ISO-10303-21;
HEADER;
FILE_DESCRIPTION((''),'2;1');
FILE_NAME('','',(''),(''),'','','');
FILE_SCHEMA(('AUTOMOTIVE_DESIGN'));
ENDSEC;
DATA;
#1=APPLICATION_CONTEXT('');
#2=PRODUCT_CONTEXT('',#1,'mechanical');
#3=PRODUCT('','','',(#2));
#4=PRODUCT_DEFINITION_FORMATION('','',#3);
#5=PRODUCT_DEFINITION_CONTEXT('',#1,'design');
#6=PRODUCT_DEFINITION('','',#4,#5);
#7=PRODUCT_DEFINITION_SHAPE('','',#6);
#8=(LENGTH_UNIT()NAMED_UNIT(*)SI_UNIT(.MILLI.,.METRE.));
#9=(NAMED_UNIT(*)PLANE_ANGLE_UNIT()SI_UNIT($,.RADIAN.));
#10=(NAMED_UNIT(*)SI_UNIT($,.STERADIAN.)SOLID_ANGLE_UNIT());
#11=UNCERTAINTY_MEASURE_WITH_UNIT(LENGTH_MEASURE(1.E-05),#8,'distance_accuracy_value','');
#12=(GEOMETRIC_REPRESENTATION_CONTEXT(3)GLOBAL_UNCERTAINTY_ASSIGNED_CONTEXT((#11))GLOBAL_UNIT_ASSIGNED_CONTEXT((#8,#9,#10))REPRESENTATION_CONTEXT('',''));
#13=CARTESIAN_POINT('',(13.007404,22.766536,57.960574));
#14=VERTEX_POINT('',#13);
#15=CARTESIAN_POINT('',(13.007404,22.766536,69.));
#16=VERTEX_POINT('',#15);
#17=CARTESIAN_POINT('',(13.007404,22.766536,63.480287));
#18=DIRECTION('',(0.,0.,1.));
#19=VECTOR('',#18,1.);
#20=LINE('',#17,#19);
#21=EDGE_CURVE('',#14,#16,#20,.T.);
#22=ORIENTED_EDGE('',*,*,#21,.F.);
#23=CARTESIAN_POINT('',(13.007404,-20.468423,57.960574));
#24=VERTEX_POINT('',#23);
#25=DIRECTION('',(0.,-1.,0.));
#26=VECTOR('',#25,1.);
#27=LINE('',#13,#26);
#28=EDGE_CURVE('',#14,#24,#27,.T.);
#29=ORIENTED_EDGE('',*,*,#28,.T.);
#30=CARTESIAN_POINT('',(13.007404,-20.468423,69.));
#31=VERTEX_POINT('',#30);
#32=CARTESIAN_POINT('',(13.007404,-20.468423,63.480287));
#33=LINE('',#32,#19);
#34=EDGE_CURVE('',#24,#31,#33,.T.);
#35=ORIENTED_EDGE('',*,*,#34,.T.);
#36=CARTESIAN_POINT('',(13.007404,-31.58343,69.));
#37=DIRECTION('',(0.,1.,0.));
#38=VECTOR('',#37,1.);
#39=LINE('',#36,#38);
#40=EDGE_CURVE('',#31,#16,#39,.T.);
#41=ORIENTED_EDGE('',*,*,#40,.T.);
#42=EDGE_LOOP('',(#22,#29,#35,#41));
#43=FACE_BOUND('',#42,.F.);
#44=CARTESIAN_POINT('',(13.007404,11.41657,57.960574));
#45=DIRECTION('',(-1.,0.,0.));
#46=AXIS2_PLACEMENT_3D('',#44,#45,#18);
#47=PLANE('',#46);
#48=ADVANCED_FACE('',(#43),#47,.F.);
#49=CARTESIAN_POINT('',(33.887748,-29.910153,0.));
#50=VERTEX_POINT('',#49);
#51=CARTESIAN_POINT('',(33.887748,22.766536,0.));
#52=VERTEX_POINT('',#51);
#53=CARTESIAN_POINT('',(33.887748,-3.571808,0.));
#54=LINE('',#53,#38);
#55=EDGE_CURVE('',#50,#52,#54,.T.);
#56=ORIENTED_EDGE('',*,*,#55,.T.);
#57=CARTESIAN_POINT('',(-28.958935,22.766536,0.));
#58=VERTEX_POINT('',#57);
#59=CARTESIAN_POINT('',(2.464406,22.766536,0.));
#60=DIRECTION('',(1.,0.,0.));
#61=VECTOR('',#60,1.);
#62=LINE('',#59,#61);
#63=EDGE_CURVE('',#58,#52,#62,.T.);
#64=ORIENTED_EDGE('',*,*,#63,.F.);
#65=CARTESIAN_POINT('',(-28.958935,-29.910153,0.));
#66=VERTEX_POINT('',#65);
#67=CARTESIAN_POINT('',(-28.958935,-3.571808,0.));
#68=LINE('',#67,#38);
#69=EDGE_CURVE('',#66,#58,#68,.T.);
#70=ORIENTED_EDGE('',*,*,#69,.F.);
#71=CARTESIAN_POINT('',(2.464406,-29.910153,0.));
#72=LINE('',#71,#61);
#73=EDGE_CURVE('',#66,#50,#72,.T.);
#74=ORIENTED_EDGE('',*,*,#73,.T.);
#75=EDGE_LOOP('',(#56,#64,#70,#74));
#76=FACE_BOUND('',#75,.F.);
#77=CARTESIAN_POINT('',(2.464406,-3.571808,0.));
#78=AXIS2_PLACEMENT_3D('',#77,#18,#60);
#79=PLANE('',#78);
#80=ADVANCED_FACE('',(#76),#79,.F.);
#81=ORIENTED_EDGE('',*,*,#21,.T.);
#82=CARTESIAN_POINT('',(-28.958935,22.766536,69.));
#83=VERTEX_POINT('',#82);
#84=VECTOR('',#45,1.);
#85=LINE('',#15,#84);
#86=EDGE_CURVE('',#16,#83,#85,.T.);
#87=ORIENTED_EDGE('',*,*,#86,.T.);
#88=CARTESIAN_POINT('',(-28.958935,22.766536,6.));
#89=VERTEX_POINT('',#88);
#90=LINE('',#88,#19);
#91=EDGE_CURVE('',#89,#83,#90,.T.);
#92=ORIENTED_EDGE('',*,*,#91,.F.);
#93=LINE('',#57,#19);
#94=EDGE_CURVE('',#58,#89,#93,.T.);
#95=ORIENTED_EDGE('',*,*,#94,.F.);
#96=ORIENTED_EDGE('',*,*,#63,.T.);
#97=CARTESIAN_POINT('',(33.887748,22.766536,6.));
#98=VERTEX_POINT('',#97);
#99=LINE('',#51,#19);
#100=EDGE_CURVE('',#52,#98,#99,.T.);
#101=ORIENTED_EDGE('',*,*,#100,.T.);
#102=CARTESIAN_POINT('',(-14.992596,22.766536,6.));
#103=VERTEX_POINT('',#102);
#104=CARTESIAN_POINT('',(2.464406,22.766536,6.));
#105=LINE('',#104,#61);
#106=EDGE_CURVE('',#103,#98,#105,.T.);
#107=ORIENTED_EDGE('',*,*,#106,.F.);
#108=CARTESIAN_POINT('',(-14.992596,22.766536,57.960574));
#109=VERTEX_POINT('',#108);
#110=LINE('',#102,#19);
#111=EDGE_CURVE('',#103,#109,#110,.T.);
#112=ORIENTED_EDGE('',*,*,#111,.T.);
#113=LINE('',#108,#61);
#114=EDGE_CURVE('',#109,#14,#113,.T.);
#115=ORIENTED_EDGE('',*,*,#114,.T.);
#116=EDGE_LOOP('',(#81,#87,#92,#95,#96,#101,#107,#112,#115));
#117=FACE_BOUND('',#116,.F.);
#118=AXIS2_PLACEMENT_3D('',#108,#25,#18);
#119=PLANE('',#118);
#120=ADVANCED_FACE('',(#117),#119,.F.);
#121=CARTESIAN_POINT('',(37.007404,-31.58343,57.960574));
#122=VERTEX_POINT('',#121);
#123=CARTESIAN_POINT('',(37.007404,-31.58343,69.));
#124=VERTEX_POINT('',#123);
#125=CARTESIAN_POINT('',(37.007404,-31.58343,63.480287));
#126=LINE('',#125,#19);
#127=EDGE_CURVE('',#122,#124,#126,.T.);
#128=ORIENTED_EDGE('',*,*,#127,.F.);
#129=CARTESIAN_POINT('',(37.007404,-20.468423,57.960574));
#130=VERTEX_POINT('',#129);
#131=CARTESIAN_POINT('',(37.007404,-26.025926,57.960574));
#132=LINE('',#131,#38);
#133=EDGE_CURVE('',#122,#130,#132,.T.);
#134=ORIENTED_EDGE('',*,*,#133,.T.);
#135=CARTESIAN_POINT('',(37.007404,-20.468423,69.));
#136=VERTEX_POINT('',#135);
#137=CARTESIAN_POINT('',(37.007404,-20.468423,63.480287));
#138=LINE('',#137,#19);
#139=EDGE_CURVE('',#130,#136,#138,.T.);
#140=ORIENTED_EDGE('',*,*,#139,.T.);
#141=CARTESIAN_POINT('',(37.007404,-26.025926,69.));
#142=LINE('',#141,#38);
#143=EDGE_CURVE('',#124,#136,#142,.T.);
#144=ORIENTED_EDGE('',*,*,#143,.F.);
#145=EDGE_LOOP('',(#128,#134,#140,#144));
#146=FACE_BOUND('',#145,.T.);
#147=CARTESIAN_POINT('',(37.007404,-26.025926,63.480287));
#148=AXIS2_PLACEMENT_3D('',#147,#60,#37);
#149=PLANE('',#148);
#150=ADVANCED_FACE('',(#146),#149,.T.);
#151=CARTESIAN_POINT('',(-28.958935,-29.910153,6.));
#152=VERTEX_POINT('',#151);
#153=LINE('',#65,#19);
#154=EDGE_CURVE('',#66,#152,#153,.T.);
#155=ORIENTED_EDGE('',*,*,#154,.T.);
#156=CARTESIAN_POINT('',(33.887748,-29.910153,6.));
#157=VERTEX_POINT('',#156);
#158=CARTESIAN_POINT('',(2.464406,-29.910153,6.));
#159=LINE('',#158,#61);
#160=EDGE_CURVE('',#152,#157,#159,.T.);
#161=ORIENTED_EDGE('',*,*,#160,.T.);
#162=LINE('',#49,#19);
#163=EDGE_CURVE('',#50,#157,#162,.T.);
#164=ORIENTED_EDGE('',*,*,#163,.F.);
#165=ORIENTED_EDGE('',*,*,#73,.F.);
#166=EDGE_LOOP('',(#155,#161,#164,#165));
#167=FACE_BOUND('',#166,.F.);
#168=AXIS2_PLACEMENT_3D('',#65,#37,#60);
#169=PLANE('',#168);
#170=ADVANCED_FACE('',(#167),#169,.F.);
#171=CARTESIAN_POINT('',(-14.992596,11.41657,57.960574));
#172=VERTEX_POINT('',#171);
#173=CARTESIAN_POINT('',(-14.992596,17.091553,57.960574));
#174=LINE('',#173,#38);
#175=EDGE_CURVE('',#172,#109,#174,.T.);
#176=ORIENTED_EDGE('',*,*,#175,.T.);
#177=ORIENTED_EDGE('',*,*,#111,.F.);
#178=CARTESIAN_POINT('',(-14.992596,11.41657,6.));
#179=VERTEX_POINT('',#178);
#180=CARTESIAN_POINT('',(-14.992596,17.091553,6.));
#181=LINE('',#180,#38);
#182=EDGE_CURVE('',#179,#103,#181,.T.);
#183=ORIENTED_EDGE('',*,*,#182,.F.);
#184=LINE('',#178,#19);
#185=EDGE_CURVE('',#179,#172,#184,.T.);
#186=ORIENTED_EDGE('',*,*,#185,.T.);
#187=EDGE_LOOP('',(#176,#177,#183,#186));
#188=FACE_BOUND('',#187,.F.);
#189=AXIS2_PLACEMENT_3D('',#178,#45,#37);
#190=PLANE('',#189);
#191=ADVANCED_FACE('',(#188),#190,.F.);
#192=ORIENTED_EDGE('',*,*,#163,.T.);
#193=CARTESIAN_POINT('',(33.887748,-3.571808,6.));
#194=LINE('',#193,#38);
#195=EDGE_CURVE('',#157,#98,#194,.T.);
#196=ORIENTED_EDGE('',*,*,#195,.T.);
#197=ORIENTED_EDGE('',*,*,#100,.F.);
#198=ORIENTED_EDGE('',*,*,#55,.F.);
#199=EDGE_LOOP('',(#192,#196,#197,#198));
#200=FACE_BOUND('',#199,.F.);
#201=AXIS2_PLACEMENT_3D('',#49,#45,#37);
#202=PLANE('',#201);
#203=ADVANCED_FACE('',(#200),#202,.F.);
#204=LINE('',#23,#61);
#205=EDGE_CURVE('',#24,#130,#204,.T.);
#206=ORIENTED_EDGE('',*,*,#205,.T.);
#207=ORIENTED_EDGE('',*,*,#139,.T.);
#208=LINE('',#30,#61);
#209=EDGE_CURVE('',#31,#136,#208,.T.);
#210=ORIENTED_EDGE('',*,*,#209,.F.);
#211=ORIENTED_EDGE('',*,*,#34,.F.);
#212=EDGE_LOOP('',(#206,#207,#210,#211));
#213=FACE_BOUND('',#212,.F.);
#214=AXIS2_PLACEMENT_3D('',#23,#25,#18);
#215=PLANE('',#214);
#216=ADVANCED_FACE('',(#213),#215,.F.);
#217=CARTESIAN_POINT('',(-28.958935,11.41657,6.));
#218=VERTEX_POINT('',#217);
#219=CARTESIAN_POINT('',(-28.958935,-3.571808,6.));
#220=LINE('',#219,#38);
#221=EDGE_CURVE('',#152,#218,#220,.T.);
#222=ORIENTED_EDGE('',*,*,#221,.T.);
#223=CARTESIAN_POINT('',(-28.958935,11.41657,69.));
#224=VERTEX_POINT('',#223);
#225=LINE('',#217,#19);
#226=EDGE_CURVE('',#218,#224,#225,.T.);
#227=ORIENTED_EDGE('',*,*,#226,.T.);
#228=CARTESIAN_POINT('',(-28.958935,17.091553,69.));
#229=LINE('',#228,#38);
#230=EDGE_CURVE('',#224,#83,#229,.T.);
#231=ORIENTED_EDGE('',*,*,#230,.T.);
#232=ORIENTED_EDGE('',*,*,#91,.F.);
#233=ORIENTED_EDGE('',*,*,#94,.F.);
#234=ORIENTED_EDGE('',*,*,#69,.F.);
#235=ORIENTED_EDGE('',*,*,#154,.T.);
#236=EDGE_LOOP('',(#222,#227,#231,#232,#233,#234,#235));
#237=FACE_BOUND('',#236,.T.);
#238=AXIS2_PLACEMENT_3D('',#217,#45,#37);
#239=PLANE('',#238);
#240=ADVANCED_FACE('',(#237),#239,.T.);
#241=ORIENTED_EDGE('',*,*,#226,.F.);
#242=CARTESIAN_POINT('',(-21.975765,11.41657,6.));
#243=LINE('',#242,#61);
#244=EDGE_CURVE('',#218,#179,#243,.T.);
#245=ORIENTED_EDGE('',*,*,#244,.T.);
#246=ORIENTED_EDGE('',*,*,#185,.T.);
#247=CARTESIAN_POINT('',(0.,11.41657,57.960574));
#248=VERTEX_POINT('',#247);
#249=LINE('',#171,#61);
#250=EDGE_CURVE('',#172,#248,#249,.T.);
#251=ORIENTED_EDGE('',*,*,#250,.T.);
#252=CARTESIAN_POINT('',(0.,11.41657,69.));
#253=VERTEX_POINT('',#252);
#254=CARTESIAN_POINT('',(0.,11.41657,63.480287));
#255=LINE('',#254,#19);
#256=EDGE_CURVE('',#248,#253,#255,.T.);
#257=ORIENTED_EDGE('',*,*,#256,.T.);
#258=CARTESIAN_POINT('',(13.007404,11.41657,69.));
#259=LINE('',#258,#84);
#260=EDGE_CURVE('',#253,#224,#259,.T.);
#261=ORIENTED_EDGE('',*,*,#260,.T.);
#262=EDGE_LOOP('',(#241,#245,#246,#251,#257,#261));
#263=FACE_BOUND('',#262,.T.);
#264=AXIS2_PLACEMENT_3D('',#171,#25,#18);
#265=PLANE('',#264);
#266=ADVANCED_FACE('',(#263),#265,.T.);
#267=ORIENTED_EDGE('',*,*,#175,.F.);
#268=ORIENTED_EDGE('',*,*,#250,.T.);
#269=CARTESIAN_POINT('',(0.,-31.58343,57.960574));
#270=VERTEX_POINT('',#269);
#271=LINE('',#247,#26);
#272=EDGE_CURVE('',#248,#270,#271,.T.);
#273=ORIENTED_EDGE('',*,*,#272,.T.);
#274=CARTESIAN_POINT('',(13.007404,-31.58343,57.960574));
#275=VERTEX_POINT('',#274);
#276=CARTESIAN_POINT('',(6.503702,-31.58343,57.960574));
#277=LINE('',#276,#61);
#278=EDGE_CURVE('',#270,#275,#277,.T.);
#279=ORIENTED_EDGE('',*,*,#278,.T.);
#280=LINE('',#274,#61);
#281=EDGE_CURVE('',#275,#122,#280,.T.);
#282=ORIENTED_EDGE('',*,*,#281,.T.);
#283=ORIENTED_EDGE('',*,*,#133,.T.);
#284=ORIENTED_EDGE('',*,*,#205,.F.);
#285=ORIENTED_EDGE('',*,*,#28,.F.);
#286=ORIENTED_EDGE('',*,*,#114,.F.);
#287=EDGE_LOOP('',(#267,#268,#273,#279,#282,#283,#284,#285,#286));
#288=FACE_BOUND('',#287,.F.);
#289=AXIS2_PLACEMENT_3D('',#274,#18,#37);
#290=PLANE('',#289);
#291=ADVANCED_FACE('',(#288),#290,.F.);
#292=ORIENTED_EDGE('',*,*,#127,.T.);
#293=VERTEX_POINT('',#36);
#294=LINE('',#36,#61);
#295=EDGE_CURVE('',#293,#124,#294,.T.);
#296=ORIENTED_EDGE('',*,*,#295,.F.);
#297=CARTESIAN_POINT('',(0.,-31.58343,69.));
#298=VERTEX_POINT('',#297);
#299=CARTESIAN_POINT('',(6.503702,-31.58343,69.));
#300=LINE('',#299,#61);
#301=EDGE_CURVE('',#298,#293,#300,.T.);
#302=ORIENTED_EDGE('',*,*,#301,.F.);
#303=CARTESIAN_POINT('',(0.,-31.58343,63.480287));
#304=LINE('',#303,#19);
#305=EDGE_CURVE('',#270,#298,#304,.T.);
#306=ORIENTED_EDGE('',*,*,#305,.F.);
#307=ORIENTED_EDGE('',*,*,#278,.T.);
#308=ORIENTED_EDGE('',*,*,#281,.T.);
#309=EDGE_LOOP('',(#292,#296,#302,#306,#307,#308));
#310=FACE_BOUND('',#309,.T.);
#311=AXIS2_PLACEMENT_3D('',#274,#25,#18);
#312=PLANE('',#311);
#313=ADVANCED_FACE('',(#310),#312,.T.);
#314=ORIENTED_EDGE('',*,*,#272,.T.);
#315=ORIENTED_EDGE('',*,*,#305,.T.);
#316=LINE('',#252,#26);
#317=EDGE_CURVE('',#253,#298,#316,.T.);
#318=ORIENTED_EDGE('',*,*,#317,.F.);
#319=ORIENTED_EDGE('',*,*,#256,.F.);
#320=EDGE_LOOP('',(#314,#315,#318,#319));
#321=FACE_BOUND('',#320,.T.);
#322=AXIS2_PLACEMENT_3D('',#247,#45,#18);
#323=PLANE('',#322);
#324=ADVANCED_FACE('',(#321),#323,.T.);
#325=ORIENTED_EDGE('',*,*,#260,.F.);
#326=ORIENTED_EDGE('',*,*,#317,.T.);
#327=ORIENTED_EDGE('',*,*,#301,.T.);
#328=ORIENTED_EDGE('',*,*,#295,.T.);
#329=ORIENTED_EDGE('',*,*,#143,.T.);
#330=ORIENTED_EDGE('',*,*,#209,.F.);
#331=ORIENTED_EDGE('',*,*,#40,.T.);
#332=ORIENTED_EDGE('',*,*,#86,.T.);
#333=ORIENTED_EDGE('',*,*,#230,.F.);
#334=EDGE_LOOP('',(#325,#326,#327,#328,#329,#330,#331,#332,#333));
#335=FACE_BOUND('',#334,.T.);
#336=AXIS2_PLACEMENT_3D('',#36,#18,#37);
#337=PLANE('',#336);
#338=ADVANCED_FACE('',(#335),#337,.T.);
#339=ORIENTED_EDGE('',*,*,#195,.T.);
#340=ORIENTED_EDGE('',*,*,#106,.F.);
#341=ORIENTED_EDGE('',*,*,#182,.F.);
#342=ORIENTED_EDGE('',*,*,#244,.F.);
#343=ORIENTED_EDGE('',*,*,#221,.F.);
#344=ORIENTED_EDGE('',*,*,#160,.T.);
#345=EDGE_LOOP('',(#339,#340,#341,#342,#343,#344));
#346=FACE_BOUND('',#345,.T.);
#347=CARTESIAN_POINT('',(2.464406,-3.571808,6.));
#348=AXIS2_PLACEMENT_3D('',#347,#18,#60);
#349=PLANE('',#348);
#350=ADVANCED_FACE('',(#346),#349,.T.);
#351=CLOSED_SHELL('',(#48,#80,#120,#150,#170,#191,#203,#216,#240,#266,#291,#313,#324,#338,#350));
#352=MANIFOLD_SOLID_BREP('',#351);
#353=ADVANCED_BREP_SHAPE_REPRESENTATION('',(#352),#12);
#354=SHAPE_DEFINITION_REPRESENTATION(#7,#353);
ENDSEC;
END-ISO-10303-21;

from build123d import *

# Parameters (mm, degrees)
F0_W     = 62.8466829658
F0_H     = 52.6766888797
F1_DEPTH = 6
F2_W     = 13.9663396403
F2_H     = 11.3499658182
F3_DEPTH = 63
F4_W     = 11.3499658182
F4_H     = 11.0394264162
F5_DEPTH = 28
F6_W     = 13.0074043497
F6_H     = 11.0394264162
F7_DEPTH = 43
F8_W     = 11.1150065735
F8_H     = 11.0394264162
F9_DEPTH = 24


with BuildPart() as f1:
    # F0 (on Top) → F1 (new body)
    with BuildSketch(Plane.XY):
        with Locations((2.4644061923, -3.5718083382)):
            Rectangle(F0_W, F0_H)
    extrude(amount=F1_DEPTH)

    # F2 (on face) → F3 (join)
    with BuildSketch(Plane.XY.offset(6)):
        with Locations((-21.9757654704, 17.0915531926)):
            Rectangle(F2_W, F2_H)
    extrude(amount=F3_DEPTH)

    # F4 (on face) → F5 (join)
    with BuildSketch(Plane.YZ.offset(-14.9925956503)):
        with Locations((17.0915531926, 63.4802867919)):
            Rectangle(F4_W, F4_H)
    extrude(amount=F5_DEPTH)

    # F6 (on face) → F7 (join)
    with BuildSketch(Plane.XZ.offset(-11.4165702835)):
        with Locations((6.5037021749, 63.4802867919)):
            Rectangle(F6_W, F6_H)
    extrude(amount=F7_DEPTH)

    # F8 (on face) → F9 (join)
    with BuildSketch(Plane.YZ.offset(13.0074043497)):
        with Locations((-26.0259264298, 63.4802867919)):
            Rectangle(F8_W, F8_H)
    extrude(amount=F9_DEPTH)


solid = f1.part
